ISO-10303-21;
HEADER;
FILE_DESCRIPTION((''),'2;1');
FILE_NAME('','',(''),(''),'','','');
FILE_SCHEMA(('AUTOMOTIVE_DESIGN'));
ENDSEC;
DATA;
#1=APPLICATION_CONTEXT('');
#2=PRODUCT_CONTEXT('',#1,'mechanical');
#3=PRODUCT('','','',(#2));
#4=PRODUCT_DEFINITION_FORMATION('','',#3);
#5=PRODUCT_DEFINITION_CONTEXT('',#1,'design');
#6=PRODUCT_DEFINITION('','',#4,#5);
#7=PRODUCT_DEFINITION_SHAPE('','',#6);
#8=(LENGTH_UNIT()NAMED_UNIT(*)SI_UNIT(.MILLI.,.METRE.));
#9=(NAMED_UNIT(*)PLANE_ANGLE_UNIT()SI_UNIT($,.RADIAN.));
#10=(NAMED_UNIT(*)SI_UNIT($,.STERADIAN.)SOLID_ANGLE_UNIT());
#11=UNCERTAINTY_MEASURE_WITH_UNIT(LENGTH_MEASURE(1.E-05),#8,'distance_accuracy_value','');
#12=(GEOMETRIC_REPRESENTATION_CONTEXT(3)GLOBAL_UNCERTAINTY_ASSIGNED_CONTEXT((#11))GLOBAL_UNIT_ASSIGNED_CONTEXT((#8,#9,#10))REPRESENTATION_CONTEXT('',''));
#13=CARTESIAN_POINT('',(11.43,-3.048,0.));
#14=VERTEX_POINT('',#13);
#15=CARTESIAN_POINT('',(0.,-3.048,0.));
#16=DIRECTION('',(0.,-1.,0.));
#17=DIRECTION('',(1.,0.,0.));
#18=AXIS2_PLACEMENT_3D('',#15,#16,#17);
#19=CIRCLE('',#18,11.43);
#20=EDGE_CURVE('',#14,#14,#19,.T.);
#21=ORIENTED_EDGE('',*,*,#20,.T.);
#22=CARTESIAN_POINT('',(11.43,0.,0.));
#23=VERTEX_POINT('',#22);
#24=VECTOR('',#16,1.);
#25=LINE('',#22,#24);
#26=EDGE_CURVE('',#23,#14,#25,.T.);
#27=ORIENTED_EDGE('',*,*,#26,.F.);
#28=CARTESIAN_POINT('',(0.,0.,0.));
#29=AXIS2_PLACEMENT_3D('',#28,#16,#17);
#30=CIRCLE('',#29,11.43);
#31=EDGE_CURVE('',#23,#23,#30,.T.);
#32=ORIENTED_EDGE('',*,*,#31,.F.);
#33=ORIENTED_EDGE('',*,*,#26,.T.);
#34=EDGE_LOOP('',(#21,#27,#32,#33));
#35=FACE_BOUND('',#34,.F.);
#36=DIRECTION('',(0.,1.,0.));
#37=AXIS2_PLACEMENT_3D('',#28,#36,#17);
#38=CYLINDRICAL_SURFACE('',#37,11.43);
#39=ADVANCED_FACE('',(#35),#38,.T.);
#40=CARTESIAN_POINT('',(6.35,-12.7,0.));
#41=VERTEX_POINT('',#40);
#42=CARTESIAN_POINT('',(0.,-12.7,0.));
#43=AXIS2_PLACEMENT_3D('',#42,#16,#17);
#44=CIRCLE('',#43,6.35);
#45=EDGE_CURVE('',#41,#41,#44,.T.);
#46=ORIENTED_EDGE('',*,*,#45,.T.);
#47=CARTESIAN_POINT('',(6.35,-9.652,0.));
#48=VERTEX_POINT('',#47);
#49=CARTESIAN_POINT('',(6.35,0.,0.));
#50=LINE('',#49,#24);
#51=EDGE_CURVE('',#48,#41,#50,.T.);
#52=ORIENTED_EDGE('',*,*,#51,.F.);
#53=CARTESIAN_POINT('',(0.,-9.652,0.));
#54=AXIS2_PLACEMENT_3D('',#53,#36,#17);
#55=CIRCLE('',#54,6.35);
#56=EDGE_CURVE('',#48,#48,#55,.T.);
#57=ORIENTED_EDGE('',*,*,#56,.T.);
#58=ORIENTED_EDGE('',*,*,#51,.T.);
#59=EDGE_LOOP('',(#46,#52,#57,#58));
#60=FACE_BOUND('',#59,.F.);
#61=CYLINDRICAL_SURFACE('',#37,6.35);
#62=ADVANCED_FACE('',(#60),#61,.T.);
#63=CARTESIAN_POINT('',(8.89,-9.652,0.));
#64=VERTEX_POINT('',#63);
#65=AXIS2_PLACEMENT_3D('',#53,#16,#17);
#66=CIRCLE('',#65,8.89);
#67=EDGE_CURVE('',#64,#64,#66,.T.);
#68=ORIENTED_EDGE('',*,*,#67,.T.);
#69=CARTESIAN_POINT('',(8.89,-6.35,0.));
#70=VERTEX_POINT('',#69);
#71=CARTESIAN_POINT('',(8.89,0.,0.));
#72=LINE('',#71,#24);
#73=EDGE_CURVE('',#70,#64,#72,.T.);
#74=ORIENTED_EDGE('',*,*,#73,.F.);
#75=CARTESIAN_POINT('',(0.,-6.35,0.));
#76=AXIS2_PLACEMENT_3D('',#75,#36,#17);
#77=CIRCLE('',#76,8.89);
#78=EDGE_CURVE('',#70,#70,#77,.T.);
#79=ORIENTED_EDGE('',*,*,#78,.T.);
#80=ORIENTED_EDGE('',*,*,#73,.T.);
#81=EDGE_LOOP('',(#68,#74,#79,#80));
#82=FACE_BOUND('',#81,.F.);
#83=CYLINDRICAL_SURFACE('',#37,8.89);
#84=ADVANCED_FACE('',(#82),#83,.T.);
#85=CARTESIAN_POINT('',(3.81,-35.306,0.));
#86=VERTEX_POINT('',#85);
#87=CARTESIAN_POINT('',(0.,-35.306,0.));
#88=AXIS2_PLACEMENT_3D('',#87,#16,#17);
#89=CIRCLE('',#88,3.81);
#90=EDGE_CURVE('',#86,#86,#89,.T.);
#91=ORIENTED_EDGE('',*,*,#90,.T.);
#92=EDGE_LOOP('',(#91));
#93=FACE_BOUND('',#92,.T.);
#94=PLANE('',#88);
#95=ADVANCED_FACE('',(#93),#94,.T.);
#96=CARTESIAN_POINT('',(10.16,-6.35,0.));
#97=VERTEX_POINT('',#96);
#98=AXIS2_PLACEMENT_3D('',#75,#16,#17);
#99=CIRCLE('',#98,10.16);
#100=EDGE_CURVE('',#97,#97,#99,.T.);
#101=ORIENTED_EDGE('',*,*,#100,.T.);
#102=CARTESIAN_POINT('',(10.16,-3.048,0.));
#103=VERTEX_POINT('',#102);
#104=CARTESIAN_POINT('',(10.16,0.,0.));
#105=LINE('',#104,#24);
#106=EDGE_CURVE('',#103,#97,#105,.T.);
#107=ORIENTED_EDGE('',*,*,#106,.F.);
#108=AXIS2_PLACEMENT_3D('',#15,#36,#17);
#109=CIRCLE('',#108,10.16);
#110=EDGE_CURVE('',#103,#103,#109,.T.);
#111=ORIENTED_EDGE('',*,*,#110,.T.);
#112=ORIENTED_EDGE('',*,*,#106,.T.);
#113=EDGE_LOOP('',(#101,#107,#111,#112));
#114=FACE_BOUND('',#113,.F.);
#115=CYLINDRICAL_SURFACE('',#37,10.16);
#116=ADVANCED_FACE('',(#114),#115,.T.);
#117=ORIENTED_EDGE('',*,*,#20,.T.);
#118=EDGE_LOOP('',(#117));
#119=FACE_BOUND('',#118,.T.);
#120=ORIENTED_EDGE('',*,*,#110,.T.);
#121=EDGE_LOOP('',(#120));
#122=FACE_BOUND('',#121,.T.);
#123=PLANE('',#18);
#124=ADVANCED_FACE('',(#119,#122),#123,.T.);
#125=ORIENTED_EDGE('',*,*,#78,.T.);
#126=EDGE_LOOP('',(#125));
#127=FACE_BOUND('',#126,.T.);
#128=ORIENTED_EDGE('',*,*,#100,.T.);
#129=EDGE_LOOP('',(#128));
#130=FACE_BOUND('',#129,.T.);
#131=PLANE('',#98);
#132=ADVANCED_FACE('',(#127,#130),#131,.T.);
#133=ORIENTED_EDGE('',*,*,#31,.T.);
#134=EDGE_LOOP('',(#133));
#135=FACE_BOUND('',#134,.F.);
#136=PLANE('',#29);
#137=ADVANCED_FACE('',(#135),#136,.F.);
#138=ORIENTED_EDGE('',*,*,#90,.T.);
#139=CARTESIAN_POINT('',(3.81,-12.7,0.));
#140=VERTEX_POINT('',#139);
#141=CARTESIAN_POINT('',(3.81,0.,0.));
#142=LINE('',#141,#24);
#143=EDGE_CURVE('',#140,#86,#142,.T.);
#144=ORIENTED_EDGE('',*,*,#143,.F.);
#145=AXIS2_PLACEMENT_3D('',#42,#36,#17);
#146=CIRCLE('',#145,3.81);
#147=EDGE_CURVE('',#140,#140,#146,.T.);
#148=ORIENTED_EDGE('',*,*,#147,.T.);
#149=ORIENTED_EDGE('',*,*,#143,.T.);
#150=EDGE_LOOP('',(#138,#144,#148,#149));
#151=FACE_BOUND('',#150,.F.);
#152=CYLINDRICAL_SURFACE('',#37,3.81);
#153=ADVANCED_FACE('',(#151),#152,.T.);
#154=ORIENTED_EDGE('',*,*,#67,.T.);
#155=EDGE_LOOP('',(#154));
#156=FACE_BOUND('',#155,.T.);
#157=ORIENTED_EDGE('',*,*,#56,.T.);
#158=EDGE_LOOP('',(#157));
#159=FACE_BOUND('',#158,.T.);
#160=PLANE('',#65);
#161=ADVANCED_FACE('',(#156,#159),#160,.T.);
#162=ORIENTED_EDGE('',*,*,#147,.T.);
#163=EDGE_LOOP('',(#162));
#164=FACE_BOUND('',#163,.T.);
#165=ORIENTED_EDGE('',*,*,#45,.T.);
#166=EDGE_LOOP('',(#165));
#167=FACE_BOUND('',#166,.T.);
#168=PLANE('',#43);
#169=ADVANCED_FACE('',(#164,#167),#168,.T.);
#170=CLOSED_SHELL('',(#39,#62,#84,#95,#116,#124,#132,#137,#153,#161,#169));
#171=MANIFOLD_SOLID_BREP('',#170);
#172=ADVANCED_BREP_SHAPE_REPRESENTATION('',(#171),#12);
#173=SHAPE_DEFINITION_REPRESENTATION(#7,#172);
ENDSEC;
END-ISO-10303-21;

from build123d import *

# Parameters (mm, degrees)
F0_R     = 3.81
F1_DEPTH = 35.306
F2_R     = 6.35
F3_DEPTH = 12.7
F4_R     = 8.89
F5_DEPTH = 9.652
F6_R     = 10.16
F7_DEPTH = 6.35
F8_R     = 11.43
F9_DEPTH = 3.048


# Not quite as in the source:
# - the program builds the solid bodies; features that only make, move or delete a surface that nothing else refers to are left out


with BuildPart() as f1:
    # F0 (on Front) → F1 (new body)
    with BuildSketch(Plane.XZ):
        Circle(F0_R)
    extrude(amount=F1_DEPTH)

    # F2 (on Front) → F3 (join)
    with BuildSketch(Plane.XZ):
        Circle(F2_R)
    extrude(amount=F3_DEPTH)

    # F4 (on Front) → F5 (join)
    with BuildSketch(Plane.XZ):
        Circle(F4_R)
    extrude(amount=F5_DEPTH)

    # F6 (on Front) → F7 (join)
    with BuildSketch(Plane.XZ):
        Circle(F6_R)
    extrude(amount=F7_DEPTH)

    # F8 (on Front) → F9 (join)
    with BuildSketch(Plane.XZ):
        Circle(F8_R)
    extrude(amount=F9_DEPTH)


solid = f1.part
